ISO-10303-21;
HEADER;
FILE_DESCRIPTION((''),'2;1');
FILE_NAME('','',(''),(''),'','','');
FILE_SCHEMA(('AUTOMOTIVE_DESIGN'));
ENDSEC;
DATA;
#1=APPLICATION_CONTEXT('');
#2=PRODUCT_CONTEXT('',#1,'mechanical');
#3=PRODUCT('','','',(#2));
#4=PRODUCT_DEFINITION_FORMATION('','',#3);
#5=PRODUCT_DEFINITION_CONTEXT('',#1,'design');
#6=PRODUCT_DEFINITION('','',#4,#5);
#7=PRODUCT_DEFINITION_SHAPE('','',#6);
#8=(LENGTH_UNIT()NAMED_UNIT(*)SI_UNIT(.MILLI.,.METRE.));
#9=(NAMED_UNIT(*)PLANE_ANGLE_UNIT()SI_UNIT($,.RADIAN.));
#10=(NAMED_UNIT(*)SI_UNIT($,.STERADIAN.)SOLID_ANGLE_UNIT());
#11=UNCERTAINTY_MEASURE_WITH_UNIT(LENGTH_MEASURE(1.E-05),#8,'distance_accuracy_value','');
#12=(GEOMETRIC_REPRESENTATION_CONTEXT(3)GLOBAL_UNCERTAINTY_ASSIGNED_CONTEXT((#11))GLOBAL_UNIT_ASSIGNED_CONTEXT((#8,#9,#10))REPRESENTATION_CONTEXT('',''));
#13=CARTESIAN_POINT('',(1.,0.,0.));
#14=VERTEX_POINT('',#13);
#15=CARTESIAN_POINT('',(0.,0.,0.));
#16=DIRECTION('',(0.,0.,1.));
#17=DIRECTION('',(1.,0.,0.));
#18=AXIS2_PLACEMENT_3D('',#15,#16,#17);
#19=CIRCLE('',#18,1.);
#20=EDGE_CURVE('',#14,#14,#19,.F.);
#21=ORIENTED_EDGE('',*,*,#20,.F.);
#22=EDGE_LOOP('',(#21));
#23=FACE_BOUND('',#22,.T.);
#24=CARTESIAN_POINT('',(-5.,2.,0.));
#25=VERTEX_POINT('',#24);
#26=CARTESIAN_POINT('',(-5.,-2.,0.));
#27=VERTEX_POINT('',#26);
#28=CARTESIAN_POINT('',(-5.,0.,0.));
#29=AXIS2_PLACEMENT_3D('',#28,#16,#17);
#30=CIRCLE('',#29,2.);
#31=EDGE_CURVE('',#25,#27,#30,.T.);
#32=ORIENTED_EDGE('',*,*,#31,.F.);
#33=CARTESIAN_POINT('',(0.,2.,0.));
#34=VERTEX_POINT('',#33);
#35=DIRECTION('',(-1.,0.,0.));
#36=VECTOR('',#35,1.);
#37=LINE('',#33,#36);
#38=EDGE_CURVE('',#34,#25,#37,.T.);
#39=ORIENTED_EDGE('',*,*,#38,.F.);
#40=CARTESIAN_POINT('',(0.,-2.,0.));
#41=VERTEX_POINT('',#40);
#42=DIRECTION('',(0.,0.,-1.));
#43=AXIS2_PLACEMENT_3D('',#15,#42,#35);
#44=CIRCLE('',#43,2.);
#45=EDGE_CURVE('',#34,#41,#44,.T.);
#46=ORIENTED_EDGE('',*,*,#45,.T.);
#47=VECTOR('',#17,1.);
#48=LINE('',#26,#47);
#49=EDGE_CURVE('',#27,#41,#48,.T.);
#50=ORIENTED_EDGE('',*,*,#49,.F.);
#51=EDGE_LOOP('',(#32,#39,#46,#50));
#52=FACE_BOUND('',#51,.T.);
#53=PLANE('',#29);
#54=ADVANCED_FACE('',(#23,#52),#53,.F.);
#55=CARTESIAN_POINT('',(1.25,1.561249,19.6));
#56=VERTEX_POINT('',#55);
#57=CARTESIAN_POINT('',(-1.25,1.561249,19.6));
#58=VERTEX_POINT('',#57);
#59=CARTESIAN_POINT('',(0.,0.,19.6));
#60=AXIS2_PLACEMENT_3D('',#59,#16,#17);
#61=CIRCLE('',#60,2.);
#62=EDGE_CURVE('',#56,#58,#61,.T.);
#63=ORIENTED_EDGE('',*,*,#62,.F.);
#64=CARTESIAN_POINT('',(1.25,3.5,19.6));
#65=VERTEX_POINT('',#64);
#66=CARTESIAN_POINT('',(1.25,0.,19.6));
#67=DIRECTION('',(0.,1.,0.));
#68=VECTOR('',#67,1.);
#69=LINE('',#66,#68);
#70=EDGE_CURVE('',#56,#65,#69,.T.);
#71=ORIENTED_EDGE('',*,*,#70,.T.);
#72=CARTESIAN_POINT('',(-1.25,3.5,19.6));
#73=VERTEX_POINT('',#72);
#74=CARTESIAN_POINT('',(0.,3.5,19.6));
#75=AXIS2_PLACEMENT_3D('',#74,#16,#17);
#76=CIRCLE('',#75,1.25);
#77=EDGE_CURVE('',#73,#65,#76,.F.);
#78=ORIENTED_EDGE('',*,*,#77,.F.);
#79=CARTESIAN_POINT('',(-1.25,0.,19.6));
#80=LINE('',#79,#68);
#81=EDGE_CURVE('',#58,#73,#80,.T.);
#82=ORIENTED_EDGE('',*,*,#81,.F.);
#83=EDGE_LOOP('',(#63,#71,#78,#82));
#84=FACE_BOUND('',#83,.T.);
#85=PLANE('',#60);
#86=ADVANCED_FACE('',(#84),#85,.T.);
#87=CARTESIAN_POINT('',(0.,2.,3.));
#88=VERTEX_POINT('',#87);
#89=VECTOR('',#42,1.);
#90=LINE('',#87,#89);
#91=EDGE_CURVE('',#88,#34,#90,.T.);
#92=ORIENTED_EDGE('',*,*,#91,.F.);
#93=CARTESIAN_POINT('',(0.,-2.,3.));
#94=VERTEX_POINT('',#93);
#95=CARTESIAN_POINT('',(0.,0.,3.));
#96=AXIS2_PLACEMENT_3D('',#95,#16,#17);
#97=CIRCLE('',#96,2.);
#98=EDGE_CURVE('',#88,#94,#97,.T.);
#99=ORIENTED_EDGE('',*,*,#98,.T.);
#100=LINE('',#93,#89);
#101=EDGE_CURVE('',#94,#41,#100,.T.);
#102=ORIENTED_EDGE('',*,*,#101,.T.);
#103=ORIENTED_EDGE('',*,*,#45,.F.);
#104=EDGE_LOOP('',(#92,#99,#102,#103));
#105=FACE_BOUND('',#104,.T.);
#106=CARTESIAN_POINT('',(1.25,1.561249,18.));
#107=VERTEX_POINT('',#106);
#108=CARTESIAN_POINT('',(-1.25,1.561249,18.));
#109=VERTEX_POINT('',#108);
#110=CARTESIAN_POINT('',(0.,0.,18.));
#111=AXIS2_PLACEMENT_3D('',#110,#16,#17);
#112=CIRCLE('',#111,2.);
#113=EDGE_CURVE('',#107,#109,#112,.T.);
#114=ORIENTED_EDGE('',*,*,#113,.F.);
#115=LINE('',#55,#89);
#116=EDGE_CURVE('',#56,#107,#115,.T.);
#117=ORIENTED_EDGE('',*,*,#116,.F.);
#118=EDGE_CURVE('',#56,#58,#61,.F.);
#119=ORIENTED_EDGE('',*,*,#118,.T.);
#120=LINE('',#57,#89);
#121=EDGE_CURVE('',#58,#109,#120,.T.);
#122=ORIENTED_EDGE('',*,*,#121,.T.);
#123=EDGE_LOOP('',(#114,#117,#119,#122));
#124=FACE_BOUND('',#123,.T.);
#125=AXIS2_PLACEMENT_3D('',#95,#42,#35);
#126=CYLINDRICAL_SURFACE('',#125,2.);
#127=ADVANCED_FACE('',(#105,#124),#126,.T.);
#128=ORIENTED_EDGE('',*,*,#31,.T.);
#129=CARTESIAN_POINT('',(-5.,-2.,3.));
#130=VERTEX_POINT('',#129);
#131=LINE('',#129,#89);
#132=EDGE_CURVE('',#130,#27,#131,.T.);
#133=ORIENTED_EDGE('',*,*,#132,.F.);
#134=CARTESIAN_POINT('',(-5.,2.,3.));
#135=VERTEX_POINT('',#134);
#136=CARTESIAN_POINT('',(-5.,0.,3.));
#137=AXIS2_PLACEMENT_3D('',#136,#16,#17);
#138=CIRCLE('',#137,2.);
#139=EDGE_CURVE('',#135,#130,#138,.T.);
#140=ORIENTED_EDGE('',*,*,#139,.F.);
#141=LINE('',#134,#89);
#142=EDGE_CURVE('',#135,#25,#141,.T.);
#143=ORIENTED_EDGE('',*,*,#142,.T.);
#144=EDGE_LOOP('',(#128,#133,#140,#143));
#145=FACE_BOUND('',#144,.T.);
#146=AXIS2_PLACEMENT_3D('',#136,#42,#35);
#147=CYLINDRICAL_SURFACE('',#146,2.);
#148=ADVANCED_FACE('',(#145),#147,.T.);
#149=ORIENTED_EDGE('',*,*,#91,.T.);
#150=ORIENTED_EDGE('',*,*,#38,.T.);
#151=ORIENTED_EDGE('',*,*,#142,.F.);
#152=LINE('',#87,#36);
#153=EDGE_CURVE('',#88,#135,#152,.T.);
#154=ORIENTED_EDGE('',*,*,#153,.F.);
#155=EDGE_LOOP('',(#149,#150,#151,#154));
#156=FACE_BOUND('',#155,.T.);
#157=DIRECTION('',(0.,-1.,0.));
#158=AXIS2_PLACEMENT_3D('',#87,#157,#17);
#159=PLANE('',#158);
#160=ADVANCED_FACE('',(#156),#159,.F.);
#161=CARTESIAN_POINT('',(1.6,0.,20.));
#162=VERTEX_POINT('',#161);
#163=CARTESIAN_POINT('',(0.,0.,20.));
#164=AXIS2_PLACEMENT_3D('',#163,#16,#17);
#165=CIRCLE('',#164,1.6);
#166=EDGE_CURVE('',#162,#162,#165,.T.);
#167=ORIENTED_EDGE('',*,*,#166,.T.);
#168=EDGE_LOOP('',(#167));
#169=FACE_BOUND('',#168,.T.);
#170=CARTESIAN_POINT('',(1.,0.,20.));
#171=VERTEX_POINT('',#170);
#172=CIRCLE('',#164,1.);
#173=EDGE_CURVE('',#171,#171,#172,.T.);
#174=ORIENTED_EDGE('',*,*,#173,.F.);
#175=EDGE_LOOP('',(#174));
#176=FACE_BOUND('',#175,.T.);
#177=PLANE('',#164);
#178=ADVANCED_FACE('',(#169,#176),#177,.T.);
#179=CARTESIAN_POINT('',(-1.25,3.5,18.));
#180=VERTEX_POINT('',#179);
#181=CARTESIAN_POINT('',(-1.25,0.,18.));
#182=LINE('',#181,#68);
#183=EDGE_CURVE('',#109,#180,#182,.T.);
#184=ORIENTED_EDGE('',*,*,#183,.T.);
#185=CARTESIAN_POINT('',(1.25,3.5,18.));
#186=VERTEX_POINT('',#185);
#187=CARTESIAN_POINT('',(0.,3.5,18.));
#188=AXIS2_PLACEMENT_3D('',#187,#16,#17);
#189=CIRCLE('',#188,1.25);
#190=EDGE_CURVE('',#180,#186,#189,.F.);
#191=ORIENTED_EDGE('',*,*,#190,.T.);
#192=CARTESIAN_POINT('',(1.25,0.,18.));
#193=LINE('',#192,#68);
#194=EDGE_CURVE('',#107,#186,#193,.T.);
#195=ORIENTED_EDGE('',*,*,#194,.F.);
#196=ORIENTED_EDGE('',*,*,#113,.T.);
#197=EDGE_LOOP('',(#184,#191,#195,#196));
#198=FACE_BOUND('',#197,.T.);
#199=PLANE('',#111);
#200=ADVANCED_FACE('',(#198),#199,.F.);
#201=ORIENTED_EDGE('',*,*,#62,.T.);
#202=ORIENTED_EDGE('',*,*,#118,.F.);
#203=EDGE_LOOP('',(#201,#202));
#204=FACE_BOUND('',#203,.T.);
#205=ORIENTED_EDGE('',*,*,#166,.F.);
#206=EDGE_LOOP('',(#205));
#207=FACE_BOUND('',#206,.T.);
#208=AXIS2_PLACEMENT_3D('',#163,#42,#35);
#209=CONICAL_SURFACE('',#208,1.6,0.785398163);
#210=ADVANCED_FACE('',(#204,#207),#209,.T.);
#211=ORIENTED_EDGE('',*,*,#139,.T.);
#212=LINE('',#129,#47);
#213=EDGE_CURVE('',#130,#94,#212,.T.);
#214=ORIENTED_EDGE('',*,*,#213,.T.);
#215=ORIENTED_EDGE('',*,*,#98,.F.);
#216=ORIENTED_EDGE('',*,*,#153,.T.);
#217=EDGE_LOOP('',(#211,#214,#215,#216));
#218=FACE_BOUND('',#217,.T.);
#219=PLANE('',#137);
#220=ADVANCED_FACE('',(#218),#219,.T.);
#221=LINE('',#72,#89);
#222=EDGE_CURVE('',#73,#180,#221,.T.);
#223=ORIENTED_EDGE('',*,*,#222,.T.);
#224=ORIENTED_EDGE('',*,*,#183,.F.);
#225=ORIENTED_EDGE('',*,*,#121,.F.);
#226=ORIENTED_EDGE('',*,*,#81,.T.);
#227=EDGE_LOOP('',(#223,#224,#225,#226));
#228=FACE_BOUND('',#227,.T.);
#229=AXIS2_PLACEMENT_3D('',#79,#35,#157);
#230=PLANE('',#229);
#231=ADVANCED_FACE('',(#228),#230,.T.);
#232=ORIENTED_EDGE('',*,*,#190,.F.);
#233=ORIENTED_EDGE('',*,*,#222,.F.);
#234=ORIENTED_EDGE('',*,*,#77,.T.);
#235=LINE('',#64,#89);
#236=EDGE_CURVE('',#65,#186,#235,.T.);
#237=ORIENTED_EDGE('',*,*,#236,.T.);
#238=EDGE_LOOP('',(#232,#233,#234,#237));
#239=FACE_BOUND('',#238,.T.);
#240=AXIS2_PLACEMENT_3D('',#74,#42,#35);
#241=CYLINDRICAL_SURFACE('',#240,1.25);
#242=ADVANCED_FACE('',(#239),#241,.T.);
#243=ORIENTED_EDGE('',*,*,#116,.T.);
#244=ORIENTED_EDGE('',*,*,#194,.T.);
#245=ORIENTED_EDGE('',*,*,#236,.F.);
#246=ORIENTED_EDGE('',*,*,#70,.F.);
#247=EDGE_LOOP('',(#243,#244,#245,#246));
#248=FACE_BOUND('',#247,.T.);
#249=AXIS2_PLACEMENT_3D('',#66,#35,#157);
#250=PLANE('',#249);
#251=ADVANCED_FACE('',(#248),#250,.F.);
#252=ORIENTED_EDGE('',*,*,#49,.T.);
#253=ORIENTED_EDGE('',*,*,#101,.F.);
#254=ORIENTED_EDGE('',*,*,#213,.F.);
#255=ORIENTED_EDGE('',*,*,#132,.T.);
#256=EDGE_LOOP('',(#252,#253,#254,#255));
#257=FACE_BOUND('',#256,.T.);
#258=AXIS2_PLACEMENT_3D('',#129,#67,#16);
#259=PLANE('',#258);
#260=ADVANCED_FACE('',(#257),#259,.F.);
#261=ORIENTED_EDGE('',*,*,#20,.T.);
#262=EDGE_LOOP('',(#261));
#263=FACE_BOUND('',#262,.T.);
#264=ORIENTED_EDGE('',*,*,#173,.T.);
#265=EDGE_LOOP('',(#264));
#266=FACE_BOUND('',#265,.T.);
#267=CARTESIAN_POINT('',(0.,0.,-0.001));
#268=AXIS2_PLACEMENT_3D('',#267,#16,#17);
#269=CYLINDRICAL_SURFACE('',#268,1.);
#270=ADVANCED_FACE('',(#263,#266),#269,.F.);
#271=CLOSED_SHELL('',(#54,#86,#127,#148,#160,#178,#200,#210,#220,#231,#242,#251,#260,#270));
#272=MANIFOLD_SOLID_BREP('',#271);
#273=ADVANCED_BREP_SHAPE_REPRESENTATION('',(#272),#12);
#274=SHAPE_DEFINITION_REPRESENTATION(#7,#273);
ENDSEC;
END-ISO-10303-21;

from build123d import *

# Parameters (mm, degrees)
AUFSATZ_LINEAR_AUSTRAGEN1_DEPTH = 3
SKIZZE2_R                       = 2
AUFSATZ_LINEAR_AUSTRAGEN2_DEPTH = 17
AUFSATZ_LINEAR_START            = 15
AUFSATZ_LINEAR_AUSTRAGEN3_DEPTH = 1.6
SCHNITT_LINEAR_AUSTRAGEN1_REACH = 23.715
SKIZZE4_R                       = 1
FASE1_SIZE                      = 0.4


with BuildPart() as part:
    # Skizze1 → Aufsatz-Linear austragen1 (new body)
    with BuildSketch(Plane.XY):
        with BuildLine():
            Line((0, 2), (-5, 2))
            ThreePointArc((-5, 2), (-7, 0), (-5, -2))
            Line((-5, -2), (0, -2))
            ThreePointArc((0, -2), (2, 0), (0, 2))
        make_face()
    extrude(amount=AUFSATZ_LINEAR_AUSTRAGEN1_DEPTH)

    # Skizze2 → Aufsatz-Linear austragen2 (add)
    with BuildSketch(Plane.XY.offset(3)):
        with Locations(Location((0, 0, 0), (0, 0, 90))):
            Circle(SKIZZE2_R)
    extrude(amount=AUFSATZ_LINEAR_AUSTRAGEN2_DEPTH)

    # Skizze3 → Aufsatz-Linear austragen3 (add)
    with BuildSketch(Plane.XY.offset(3).offset(AUFSATZ_LINEAR_START)):
        with BuildLine():
            Line((-1.25, 3.5), (-1.25, 1.5612495))
            ThreePointArc((-1.25, 1.5612495), (0, 2), (1.25, 1.5612495))
            Line((1.25, 1.5612495), (1.25, 3.5))
            ThreePointArc((1.25, 3.5), (0, 4.75), (-1.25, 3.5))
        make_face()
    extrude(amount=AUFSATZ_LINEAR_AUSTRAGEN3_DEPTH)

    # Skizze4 → Schnitt-Linear austragen1 (cut, up to next)
    with BuildSketch(Plane.XY.offset(20), mode=Mode.PRIVATE) as schnitt_linear_austragen1_sk1:
        Circle(SKIZZE4_R)
    schnitt_linear_austragen1_tool1 = extrude(schnitt_linear_austragen1_sk1.sketch, amount=-SCHNITT_LINEAR_AUSTRAGEN1_REACH, mode=Mode.PRIVATE) & part.part
    add(schnitt_linear_austragen1_tool1.solids().sort_by_distance((0, 0, 20))[0], mode=Mode.SUBTRACT)

    # Fase1
    fase1_edges = [part.edges().sort_by_distance(p)[0] for p in [
        (0, -2, 20),
    ]]
    chamfer(fase1_edges, length=FASE1_SIZE - 0.0001)  # a hair under: the kernel refuses the full size


solid = part.part
